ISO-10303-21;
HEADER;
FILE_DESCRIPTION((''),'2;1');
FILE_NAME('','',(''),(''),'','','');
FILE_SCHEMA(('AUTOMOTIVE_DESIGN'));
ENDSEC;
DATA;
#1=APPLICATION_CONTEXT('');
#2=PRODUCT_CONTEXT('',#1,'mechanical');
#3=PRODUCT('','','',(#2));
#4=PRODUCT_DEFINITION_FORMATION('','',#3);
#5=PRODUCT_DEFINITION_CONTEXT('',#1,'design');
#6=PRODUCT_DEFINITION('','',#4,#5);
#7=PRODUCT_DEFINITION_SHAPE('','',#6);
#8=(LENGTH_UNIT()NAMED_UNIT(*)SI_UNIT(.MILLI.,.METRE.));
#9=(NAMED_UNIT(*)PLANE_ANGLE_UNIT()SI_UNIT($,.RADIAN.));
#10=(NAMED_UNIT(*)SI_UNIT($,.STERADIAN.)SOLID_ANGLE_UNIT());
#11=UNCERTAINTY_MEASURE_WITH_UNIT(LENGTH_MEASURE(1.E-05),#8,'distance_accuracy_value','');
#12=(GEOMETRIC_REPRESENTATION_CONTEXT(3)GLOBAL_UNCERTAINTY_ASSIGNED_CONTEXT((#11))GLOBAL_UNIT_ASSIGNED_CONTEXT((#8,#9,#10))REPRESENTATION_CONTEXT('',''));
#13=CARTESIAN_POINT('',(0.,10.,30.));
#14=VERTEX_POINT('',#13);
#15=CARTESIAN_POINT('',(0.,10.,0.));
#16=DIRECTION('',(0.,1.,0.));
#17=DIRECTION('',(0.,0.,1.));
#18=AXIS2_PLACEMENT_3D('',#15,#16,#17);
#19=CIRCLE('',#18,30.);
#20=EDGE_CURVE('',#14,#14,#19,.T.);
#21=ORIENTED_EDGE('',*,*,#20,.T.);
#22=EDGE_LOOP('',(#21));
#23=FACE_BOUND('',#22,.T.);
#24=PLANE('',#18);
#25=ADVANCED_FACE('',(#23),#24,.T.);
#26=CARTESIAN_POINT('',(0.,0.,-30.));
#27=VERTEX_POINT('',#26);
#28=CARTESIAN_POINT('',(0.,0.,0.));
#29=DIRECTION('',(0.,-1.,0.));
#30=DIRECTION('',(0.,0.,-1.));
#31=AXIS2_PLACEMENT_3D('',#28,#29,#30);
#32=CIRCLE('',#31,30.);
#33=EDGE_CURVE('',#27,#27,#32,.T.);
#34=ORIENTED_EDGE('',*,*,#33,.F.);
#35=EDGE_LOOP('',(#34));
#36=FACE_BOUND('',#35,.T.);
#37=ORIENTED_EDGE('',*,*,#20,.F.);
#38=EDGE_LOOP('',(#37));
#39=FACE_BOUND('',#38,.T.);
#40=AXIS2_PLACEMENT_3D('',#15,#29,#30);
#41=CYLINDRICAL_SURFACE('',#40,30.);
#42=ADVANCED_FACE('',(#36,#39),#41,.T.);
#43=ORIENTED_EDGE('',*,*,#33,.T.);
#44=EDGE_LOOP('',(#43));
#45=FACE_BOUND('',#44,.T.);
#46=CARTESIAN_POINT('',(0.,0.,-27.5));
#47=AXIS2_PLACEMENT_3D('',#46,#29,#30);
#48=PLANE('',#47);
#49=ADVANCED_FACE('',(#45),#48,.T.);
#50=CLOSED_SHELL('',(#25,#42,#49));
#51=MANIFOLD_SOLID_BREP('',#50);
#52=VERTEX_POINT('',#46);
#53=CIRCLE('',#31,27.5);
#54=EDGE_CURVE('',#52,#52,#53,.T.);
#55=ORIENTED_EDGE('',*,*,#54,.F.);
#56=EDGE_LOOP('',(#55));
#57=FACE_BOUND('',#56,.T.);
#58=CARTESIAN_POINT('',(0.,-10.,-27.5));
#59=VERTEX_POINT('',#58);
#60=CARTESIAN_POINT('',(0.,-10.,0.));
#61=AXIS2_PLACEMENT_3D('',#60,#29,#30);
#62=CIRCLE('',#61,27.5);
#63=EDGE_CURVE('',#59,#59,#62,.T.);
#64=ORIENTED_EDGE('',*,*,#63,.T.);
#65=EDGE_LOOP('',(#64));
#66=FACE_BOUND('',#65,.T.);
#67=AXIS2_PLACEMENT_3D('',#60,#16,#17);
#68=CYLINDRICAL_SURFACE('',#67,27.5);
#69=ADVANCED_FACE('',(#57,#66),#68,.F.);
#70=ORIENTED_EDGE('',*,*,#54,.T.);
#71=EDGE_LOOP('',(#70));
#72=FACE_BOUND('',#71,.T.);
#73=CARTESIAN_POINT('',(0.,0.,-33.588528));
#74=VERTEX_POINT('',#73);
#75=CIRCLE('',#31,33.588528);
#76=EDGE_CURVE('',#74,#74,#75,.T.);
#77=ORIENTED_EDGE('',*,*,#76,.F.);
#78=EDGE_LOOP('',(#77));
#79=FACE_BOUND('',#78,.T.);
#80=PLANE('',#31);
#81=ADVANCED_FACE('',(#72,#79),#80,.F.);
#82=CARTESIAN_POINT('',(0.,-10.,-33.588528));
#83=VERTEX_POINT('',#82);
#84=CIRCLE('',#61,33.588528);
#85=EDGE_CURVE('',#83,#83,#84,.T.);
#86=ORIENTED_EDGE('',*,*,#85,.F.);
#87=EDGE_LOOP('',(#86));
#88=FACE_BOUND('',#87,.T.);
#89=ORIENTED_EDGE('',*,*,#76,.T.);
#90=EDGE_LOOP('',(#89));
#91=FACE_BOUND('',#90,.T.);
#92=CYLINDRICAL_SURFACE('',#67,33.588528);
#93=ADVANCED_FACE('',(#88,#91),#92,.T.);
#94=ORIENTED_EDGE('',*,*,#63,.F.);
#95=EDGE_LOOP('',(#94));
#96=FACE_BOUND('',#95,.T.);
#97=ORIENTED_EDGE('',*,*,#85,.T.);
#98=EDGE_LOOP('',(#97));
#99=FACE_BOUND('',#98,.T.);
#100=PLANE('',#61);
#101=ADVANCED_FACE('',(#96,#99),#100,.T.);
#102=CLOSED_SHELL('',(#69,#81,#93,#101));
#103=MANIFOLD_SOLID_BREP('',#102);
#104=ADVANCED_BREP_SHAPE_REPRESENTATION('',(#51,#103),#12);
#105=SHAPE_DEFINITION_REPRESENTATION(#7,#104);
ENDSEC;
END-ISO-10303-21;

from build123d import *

# Parameters (mm, degrees)
SKETCH1_R           = 30
BOSS_EXTRUDE1_DEPTH = 10
SKETCH2_R           = 33.588527639
SKETCH2_R_2         = 27.5
BOSS_EXTRUDE2_DEPTH = 10


with BuildPart() as part:
    # Sketch1 → Boss-Extrude1 (new body)
    with BuildSketch(Plane(origin=(0, 0, 0), x_dir=(1, 0, 0), z_dir=(0, 1, 0))):
        Circle(SKETCH1_R)
    extrude(amount=BOSS_EXTRUDE1_DEPTH)

    # Sketch2 → Boss-Extrude2 (add)
    with BuildSketch(Plane(origin=(0, 0, 0), x_dir=(-1, 0, 0), z_dir=(0, -1, 0))):
        Circle(SKETCH2_R)
        Circle(SKETCH2_R_2, mode=Mode.SUBTRACT)
    extrude(amount=BOSS_EXTRUDE2_DEPTH)


with BuildPart() as body_2:
    # Split1: the piece on the far side of the plane
    add(part.part)
    split(bisect_by=Plane.ZX, keep=Keep.BOTTOM)


with BuildPart() as part_1:
    add(part.part)

    # Split1
    split(bisect_by=Plane.ZX, keep=Keep.TOP)


solid = Compound([body_2.part, part_1.part])
